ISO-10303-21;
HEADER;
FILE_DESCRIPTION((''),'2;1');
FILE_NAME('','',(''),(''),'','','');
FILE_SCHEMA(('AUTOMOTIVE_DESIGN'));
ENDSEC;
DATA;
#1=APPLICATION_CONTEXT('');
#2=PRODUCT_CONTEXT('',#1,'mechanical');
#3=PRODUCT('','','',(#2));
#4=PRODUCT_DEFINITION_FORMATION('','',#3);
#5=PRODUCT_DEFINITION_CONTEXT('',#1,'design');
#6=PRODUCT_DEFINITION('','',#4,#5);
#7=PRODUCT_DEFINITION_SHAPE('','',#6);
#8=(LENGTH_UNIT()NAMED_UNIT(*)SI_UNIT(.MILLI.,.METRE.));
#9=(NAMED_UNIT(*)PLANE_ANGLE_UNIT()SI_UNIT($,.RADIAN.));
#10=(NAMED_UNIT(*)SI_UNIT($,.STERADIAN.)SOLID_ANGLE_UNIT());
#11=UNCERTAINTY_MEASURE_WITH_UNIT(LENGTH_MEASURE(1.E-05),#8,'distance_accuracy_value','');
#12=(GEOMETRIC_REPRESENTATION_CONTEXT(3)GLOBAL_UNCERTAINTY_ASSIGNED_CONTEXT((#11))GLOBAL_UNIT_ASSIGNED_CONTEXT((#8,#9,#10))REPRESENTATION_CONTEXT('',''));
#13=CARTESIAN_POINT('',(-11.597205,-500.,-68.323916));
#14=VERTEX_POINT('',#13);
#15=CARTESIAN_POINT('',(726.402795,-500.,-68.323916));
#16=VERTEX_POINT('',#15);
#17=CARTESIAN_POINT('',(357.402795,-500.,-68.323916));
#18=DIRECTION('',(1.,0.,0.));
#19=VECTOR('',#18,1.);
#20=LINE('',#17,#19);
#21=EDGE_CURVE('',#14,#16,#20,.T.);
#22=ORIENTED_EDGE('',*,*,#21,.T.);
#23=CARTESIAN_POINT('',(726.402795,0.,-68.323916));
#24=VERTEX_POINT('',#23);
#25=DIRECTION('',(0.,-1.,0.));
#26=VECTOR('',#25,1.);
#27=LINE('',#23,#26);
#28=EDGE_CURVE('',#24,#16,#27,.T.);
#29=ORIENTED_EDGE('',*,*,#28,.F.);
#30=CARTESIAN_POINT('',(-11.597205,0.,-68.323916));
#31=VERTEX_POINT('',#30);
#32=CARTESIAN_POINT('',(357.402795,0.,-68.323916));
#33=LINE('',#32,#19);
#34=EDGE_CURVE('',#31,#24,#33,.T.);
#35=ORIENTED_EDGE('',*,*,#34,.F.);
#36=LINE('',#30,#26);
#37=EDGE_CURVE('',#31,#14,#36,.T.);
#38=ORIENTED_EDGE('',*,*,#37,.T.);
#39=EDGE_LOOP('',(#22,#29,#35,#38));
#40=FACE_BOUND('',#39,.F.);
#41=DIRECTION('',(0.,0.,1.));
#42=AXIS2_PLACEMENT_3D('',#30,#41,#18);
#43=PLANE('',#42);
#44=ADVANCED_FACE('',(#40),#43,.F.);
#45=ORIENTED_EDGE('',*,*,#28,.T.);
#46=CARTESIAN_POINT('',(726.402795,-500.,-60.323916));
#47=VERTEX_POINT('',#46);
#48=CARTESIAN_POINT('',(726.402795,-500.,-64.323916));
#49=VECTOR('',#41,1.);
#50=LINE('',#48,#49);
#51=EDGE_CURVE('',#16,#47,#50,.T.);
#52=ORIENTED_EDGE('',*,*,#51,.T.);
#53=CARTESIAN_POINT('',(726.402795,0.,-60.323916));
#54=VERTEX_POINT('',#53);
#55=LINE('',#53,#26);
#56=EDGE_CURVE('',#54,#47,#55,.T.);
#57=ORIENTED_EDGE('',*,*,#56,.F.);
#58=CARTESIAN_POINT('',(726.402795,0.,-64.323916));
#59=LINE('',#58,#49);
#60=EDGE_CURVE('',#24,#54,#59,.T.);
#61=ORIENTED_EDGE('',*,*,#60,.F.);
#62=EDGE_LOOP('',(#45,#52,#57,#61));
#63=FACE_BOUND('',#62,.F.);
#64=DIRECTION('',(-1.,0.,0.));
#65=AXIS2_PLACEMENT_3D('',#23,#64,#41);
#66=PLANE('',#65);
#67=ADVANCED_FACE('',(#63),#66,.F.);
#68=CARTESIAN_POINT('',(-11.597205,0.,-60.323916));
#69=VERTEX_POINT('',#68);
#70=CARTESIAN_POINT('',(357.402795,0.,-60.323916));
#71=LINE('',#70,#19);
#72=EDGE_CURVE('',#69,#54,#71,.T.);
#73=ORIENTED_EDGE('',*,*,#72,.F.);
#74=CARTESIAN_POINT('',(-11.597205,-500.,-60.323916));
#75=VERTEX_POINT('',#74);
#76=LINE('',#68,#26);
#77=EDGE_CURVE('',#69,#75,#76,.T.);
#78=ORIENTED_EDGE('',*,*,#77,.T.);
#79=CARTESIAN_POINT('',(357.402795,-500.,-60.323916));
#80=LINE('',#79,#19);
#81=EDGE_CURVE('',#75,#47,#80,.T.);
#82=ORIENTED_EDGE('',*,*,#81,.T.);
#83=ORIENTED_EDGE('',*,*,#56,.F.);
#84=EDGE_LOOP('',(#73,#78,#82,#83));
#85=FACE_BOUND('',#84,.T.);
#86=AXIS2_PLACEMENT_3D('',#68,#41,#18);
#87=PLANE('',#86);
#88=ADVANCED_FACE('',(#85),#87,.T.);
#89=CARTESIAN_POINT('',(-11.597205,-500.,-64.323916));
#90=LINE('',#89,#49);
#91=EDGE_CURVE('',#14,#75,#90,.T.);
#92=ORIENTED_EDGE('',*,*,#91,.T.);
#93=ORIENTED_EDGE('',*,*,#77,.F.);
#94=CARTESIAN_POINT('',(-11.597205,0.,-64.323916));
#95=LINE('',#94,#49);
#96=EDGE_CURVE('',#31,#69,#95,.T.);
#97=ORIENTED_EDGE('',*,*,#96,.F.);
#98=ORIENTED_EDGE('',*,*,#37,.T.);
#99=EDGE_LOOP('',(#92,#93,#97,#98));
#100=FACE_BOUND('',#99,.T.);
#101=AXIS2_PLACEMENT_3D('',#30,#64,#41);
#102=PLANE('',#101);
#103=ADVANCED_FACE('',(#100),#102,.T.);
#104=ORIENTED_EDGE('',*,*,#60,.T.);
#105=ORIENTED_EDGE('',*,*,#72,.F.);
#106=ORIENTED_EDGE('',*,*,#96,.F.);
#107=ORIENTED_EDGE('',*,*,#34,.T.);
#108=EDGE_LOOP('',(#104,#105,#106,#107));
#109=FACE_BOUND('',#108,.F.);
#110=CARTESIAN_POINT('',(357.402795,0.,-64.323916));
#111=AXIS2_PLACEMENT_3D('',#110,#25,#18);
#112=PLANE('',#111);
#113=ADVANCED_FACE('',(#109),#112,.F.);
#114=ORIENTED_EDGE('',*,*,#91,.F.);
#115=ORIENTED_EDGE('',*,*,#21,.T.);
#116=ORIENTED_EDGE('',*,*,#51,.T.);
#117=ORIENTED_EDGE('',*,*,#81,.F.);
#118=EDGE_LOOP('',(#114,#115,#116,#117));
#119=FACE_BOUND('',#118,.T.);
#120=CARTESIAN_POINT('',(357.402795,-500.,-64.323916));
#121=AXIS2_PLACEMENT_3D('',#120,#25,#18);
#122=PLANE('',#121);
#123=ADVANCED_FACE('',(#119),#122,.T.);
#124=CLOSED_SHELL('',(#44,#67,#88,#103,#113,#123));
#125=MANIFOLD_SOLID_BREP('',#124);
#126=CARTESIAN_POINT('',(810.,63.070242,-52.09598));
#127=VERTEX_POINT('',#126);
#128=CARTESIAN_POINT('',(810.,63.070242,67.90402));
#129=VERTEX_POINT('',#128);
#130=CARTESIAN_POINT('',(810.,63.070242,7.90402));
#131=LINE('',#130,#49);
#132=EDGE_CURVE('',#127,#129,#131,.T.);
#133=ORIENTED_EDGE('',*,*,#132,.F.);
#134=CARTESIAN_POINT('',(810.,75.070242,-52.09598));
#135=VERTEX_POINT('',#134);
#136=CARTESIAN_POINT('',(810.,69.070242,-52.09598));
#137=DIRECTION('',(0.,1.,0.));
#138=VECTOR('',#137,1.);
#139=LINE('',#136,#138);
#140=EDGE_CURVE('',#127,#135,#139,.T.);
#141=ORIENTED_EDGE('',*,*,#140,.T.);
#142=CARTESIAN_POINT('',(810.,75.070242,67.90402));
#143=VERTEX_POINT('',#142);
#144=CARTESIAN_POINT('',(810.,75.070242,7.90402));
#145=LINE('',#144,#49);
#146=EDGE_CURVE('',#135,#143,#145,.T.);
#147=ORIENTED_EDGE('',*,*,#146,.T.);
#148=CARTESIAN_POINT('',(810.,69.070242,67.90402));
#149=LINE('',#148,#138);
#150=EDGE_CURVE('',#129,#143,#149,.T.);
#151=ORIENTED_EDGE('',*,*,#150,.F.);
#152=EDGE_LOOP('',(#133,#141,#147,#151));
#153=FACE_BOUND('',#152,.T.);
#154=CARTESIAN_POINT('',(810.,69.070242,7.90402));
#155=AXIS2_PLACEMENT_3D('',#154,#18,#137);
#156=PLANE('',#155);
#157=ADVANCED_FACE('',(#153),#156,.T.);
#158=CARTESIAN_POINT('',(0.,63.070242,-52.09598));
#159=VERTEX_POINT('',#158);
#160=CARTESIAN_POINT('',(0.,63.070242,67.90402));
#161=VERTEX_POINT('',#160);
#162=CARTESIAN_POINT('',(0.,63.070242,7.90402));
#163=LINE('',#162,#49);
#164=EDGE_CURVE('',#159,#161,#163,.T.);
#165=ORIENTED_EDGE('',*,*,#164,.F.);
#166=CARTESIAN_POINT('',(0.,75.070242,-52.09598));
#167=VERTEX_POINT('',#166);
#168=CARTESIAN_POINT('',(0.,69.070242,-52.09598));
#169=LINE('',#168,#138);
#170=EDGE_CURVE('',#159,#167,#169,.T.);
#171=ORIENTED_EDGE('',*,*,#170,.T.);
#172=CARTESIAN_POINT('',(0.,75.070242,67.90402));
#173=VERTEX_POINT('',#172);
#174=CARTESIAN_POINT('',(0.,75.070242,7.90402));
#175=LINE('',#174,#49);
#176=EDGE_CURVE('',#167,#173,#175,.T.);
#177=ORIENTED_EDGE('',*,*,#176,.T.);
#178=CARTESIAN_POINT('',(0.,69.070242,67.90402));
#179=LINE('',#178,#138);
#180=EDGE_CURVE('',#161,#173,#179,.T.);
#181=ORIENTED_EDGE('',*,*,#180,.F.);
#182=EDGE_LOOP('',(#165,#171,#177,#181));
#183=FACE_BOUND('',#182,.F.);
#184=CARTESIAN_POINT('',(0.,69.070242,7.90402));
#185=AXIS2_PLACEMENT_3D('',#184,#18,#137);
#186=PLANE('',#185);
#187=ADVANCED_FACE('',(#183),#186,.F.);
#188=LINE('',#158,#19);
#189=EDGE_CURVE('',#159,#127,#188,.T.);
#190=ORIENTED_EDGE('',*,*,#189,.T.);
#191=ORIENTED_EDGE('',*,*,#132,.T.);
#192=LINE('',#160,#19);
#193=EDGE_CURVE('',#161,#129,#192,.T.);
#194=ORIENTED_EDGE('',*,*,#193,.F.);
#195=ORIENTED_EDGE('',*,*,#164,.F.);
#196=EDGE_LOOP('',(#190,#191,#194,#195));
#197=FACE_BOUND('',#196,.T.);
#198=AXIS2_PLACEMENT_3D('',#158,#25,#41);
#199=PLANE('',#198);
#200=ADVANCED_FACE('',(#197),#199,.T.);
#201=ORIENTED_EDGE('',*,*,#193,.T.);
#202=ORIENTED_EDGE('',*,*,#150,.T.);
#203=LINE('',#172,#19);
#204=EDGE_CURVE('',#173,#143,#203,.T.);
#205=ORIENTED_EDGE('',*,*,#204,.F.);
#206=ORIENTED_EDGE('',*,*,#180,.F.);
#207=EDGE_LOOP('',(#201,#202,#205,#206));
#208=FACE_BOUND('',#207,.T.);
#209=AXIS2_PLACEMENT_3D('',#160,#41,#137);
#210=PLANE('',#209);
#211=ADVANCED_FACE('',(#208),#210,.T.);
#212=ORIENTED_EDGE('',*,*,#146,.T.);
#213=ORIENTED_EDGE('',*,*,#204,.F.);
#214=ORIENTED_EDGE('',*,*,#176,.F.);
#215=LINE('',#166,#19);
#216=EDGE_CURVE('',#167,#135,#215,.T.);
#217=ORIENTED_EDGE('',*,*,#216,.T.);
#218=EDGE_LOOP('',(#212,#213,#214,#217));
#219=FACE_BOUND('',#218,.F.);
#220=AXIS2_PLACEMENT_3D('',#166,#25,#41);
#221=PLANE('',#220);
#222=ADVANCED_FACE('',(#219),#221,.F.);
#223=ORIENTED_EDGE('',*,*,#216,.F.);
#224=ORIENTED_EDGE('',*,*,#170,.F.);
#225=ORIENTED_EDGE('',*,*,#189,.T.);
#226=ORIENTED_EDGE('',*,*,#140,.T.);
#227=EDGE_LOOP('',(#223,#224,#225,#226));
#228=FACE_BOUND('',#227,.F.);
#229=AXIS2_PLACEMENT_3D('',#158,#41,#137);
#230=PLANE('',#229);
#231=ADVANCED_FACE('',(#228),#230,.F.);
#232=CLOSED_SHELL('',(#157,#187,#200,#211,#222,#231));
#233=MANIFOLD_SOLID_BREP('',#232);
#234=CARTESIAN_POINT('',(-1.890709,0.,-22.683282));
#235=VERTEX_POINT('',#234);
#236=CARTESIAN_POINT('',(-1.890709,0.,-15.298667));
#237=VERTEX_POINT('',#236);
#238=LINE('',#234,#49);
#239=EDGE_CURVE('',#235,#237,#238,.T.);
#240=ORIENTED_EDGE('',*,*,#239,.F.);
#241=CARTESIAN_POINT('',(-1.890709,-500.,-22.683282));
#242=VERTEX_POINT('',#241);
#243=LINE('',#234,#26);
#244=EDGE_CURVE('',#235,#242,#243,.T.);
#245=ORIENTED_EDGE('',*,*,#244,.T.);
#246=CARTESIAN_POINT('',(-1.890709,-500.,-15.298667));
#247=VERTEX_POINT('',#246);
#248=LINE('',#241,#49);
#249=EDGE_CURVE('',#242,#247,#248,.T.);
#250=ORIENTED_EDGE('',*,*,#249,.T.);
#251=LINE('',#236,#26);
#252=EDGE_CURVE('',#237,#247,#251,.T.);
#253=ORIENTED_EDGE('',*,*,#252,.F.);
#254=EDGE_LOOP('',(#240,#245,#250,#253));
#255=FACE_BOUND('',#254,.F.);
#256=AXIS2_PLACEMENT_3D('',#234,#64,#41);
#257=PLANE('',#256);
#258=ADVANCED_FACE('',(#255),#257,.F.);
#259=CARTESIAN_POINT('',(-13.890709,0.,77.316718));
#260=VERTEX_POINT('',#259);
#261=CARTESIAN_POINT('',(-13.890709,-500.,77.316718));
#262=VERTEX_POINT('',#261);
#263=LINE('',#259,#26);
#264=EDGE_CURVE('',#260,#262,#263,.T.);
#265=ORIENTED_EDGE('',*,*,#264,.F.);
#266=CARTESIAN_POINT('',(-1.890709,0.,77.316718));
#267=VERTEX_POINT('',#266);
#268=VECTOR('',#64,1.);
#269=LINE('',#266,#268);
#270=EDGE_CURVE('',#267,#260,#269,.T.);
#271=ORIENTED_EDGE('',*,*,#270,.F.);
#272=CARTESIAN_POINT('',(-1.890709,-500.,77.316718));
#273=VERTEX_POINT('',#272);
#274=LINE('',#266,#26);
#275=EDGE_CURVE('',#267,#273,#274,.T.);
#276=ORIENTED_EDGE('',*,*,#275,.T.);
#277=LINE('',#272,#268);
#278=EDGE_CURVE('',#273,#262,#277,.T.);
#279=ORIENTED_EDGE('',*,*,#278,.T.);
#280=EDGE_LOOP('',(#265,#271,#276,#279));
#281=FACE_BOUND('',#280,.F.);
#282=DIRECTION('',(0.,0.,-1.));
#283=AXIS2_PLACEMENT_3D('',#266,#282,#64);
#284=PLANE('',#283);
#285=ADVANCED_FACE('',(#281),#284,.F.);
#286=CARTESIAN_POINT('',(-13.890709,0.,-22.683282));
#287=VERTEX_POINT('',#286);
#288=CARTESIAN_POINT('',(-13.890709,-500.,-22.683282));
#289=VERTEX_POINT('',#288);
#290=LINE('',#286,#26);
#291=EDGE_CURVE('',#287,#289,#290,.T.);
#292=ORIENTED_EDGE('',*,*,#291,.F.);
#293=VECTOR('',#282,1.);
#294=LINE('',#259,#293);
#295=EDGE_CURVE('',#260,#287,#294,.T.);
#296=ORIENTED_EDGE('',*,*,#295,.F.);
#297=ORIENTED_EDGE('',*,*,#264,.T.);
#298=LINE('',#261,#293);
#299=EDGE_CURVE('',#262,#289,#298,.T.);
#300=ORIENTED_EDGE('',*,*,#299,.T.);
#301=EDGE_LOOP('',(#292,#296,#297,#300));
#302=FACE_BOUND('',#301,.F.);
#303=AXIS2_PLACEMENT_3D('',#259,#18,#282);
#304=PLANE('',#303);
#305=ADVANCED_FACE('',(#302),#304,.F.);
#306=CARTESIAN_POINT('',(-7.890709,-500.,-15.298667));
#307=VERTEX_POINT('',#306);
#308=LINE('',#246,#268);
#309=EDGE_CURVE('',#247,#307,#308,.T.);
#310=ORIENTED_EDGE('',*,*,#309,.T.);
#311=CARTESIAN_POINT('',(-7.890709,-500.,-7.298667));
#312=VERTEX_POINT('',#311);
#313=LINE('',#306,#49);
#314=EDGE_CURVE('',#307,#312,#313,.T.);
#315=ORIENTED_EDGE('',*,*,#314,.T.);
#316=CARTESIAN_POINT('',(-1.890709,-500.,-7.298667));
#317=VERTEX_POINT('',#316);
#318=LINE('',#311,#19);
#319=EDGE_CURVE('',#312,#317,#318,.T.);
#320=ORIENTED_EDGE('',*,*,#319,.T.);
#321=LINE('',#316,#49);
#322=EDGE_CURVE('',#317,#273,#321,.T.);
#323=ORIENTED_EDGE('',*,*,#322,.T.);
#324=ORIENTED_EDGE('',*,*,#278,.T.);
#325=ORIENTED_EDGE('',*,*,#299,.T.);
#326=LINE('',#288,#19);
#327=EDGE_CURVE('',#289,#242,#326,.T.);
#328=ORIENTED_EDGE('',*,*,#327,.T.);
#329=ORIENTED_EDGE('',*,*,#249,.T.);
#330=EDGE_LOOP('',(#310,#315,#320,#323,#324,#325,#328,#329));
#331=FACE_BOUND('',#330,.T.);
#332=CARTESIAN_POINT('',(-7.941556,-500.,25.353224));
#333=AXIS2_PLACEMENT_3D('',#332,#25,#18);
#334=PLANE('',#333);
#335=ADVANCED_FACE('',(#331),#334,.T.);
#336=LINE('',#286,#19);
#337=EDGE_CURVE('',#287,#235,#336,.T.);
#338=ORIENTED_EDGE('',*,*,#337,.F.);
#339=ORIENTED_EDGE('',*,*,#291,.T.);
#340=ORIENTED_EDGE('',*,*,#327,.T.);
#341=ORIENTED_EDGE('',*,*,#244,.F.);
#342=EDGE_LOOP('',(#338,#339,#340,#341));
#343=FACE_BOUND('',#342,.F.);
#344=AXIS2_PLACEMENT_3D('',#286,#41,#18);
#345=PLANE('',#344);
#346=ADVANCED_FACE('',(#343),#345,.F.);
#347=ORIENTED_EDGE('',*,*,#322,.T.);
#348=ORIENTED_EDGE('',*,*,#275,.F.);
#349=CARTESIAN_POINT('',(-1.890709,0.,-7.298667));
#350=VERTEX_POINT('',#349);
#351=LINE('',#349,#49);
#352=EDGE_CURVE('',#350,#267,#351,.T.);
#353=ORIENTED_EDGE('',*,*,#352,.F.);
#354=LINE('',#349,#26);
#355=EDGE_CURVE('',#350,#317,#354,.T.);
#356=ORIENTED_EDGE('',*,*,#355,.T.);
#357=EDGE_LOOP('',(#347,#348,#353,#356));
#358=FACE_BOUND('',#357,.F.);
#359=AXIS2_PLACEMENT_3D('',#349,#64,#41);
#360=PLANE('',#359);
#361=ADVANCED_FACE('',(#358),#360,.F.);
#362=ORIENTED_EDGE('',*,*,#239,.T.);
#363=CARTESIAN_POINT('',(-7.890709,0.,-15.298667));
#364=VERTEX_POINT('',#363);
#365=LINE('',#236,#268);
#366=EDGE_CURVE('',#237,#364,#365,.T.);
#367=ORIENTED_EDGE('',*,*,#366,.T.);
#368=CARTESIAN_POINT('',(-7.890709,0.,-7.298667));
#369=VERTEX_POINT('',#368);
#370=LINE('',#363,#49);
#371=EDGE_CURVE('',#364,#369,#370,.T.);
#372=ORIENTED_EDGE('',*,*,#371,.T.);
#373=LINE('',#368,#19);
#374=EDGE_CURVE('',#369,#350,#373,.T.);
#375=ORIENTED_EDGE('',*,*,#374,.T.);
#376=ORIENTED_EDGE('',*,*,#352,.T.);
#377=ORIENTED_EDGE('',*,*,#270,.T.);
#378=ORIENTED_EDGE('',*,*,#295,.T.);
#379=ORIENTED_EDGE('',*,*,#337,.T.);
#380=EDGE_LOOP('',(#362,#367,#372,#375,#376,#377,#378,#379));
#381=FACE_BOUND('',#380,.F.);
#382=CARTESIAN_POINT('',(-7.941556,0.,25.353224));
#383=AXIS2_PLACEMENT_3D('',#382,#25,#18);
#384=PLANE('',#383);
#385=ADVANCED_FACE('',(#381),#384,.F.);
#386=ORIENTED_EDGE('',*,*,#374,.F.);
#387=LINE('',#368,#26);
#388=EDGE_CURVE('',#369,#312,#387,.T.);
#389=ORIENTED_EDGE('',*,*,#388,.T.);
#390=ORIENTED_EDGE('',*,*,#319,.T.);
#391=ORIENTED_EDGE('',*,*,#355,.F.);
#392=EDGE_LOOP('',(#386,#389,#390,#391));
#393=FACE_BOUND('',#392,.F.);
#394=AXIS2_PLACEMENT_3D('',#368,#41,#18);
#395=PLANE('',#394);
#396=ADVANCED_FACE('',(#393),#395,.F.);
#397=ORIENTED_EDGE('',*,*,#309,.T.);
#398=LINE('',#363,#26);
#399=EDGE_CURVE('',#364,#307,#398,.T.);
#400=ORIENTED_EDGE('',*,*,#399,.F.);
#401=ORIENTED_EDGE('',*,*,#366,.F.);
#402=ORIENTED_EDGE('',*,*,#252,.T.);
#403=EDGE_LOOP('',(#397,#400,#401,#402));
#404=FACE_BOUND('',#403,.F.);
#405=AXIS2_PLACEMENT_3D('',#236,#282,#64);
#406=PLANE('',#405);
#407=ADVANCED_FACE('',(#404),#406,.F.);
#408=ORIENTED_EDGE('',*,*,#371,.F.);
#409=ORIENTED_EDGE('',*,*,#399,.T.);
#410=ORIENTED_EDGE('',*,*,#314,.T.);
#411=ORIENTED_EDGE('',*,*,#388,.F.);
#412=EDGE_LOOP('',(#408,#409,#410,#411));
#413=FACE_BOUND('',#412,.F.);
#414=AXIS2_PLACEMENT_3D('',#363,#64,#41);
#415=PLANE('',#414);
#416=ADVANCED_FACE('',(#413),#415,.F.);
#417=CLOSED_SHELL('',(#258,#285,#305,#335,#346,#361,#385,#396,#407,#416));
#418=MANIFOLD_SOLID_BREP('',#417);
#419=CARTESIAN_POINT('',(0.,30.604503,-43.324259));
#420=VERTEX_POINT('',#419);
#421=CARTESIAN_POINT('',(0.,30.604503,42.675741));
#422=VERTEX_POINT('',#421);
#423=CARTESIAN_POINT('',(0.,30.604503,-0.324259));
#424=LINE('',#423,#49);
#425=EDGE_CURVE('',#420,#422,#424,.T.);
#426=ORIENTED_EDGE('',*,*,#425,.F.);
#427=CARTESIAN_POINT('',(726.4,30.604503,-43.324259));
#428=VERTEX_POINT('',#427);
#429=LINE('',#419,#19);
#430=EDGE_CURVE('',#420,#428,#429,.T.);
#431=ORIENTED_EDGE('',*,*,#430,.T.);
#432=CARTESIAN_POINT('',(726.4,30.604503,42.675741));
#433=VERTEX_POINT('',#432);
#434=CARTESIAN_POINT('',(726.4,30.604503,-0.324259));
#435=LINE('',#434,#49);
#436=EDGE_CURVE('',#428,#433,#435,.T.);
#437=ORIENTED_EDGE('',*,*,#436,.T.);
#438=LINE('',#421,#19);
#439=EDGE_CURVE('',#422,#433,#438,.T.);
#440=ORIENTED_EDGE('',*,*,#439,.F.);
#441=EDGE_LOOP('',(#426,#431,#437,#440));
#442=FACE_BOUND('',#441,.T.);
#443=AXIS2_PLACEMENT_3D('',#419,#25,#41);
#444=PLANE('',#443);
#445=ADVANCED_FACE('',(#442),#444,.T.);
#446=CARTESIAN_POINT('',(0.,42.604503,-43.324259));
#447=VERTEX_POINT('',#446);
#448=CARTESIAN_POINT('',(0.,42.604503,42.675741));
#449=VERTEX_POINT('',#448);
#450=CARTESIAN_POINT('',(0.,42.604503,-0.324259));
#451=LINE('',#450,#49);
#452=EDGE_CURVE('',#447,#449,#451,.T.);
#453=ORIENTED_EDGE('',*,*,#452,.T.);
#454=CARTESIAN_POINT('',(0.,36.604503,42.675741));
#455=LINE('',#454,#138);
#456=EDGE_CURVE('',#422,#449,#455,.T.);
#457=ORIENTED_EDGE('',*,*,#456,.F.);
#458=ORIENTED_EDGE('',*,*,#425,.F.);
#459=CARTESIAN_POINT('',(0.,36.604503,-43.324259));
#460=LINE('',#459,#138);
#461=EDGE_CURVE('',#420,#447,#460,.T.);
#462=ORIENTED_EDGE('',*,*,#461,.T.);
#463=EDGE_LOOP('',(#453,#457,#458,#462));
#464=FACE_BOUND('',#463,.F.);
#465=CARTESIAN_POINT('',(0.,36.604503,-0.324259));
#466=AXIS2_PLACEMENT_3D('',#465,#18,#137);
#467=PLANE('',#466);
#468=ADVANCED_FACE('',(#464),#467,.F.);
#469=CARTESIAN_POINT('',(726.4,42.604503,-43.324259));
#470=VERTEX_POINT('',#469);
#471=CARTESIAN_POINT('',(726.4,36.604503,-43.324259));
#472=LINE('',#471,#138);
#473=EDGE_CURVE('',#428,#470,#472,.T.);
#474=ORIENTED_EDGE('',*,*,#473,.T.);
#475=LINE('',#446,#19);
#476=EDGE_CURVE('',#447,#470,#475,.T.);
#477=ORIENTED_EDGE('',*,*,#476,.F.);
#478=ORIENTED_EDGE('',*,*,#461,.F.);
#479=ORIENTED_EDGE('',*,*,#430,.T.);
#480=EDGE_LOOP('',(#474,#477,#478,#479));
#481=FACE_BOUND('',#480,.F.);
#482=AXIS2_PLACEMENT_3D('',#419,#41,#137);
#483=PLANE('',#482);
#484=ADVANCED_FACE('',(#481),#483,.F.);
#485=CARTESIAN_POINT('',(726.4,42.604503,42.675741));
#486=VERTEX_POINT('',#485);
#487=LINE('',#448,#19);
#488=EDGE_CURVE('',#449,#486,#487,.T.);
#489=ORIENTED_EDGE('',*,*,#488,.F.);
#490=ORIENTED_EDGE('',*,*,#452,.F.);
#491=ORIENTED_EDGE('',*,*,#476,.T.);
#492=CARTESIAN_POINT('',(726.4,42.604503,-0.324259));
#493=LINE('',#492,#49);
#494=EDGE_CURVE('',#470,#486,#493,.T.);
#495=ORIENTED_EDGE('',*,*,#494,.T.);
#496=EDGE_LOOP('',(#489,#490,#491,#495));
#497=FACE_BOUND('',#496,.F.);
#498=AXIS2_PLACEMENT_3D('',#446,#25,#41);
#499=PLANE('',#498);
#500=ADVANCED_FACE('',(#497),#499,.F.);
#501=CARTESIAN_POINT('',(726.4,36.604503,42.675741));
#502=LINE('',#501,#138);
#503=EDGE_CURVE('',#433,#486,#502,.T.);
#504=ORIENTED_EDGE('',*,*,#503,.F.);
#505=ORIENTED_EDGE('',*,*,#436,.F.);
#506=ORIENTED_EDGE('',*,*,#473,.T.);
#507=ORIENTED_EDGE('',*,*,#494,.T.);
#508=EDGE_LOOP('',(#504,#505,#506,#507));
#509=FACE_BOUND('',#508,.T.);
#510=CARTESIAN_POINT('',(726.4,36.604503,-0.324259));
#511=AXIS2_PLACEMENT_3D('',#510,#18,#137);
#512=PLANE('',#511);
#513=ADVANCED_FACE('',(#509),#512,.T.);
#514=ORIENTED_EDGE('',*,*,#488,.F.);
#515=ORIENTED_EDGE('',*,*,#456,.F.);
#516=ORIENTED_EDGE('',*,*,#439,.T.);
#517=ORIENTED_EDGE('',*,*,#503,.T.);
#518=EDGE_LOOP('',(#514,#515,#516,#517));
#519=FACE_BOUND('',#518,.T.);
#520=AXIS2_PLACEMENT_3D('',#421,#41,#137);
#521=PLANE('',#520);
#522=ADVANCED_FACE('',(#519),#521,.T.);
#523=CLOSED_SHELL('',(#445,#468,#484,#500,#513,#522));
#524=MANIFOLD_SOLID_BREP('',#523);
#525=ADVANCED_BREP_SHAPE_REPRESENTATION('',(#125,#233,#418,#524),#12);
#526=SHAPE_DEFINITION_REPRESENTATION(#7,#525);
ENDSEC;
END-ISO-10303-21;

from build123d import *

# Parameters (mm, degrees)
F1_DEPTH = 500
F2_W     = 738
F2_H     = 8
F3_DEPTH = 500
F4_W     = 12
F4_H     = 86
F5_DEPTH = 726.4
F6_W     = 12
F6_H     = 120
F7_DEPTH = 810


# Not quite as in the source:
# - a feature names something its author has since deleted; it is built from what else it names


with BuildPart() as f1:
    # F0 (on Front) → F1 (new body)
    with BuildSketch(Plane.XZ):
        Polygon((-1.8907085117, 77.3167183763), (-13.8907085117, 77.3167183763), (-13.8907085117, -22.6832816237), (-1.8907085117, -22.6832816237), (-1.8907085117, -15.298666623), (-7.8907085117, -15.298666623), (-7.8907085117, -7.298666623), (-1.8907085117, -7.298666623), align=None)
    extrude(amount=F1_DEPTH)


with BuildPart() as f3:
    # F2 (on Front) → F3 (new body)
    with BuildSketch(Plane.XZ):
        with Locations((357.4027951019, -64.3239161)):
            Rectangle(F2_W, F2_H)
    extrude(amount=F3_DEPTH)


with BuildPart() as f5:
    # F4 (on Right) → F5 (new body)
    with BuildSketch(Plane.YZ):
        with Locations((36.6045031697, -0.3242592409)):
            Rectangle(F4_W, F4_H)
    extrude(amount=F5_DEPTH)


with BuildPart() as f7:
    # F6 (on Right) → F7 (new body)
    with BuildSketch(Plane.YZ):
        with Locations((69.0702423453, 7.9040200152)):
            Rectangle(F6_W, F6_H)
    extrude(amount=F7_DEPTH)


solid = Compound([f1.part, f3.part, f5.part, f7.part])
